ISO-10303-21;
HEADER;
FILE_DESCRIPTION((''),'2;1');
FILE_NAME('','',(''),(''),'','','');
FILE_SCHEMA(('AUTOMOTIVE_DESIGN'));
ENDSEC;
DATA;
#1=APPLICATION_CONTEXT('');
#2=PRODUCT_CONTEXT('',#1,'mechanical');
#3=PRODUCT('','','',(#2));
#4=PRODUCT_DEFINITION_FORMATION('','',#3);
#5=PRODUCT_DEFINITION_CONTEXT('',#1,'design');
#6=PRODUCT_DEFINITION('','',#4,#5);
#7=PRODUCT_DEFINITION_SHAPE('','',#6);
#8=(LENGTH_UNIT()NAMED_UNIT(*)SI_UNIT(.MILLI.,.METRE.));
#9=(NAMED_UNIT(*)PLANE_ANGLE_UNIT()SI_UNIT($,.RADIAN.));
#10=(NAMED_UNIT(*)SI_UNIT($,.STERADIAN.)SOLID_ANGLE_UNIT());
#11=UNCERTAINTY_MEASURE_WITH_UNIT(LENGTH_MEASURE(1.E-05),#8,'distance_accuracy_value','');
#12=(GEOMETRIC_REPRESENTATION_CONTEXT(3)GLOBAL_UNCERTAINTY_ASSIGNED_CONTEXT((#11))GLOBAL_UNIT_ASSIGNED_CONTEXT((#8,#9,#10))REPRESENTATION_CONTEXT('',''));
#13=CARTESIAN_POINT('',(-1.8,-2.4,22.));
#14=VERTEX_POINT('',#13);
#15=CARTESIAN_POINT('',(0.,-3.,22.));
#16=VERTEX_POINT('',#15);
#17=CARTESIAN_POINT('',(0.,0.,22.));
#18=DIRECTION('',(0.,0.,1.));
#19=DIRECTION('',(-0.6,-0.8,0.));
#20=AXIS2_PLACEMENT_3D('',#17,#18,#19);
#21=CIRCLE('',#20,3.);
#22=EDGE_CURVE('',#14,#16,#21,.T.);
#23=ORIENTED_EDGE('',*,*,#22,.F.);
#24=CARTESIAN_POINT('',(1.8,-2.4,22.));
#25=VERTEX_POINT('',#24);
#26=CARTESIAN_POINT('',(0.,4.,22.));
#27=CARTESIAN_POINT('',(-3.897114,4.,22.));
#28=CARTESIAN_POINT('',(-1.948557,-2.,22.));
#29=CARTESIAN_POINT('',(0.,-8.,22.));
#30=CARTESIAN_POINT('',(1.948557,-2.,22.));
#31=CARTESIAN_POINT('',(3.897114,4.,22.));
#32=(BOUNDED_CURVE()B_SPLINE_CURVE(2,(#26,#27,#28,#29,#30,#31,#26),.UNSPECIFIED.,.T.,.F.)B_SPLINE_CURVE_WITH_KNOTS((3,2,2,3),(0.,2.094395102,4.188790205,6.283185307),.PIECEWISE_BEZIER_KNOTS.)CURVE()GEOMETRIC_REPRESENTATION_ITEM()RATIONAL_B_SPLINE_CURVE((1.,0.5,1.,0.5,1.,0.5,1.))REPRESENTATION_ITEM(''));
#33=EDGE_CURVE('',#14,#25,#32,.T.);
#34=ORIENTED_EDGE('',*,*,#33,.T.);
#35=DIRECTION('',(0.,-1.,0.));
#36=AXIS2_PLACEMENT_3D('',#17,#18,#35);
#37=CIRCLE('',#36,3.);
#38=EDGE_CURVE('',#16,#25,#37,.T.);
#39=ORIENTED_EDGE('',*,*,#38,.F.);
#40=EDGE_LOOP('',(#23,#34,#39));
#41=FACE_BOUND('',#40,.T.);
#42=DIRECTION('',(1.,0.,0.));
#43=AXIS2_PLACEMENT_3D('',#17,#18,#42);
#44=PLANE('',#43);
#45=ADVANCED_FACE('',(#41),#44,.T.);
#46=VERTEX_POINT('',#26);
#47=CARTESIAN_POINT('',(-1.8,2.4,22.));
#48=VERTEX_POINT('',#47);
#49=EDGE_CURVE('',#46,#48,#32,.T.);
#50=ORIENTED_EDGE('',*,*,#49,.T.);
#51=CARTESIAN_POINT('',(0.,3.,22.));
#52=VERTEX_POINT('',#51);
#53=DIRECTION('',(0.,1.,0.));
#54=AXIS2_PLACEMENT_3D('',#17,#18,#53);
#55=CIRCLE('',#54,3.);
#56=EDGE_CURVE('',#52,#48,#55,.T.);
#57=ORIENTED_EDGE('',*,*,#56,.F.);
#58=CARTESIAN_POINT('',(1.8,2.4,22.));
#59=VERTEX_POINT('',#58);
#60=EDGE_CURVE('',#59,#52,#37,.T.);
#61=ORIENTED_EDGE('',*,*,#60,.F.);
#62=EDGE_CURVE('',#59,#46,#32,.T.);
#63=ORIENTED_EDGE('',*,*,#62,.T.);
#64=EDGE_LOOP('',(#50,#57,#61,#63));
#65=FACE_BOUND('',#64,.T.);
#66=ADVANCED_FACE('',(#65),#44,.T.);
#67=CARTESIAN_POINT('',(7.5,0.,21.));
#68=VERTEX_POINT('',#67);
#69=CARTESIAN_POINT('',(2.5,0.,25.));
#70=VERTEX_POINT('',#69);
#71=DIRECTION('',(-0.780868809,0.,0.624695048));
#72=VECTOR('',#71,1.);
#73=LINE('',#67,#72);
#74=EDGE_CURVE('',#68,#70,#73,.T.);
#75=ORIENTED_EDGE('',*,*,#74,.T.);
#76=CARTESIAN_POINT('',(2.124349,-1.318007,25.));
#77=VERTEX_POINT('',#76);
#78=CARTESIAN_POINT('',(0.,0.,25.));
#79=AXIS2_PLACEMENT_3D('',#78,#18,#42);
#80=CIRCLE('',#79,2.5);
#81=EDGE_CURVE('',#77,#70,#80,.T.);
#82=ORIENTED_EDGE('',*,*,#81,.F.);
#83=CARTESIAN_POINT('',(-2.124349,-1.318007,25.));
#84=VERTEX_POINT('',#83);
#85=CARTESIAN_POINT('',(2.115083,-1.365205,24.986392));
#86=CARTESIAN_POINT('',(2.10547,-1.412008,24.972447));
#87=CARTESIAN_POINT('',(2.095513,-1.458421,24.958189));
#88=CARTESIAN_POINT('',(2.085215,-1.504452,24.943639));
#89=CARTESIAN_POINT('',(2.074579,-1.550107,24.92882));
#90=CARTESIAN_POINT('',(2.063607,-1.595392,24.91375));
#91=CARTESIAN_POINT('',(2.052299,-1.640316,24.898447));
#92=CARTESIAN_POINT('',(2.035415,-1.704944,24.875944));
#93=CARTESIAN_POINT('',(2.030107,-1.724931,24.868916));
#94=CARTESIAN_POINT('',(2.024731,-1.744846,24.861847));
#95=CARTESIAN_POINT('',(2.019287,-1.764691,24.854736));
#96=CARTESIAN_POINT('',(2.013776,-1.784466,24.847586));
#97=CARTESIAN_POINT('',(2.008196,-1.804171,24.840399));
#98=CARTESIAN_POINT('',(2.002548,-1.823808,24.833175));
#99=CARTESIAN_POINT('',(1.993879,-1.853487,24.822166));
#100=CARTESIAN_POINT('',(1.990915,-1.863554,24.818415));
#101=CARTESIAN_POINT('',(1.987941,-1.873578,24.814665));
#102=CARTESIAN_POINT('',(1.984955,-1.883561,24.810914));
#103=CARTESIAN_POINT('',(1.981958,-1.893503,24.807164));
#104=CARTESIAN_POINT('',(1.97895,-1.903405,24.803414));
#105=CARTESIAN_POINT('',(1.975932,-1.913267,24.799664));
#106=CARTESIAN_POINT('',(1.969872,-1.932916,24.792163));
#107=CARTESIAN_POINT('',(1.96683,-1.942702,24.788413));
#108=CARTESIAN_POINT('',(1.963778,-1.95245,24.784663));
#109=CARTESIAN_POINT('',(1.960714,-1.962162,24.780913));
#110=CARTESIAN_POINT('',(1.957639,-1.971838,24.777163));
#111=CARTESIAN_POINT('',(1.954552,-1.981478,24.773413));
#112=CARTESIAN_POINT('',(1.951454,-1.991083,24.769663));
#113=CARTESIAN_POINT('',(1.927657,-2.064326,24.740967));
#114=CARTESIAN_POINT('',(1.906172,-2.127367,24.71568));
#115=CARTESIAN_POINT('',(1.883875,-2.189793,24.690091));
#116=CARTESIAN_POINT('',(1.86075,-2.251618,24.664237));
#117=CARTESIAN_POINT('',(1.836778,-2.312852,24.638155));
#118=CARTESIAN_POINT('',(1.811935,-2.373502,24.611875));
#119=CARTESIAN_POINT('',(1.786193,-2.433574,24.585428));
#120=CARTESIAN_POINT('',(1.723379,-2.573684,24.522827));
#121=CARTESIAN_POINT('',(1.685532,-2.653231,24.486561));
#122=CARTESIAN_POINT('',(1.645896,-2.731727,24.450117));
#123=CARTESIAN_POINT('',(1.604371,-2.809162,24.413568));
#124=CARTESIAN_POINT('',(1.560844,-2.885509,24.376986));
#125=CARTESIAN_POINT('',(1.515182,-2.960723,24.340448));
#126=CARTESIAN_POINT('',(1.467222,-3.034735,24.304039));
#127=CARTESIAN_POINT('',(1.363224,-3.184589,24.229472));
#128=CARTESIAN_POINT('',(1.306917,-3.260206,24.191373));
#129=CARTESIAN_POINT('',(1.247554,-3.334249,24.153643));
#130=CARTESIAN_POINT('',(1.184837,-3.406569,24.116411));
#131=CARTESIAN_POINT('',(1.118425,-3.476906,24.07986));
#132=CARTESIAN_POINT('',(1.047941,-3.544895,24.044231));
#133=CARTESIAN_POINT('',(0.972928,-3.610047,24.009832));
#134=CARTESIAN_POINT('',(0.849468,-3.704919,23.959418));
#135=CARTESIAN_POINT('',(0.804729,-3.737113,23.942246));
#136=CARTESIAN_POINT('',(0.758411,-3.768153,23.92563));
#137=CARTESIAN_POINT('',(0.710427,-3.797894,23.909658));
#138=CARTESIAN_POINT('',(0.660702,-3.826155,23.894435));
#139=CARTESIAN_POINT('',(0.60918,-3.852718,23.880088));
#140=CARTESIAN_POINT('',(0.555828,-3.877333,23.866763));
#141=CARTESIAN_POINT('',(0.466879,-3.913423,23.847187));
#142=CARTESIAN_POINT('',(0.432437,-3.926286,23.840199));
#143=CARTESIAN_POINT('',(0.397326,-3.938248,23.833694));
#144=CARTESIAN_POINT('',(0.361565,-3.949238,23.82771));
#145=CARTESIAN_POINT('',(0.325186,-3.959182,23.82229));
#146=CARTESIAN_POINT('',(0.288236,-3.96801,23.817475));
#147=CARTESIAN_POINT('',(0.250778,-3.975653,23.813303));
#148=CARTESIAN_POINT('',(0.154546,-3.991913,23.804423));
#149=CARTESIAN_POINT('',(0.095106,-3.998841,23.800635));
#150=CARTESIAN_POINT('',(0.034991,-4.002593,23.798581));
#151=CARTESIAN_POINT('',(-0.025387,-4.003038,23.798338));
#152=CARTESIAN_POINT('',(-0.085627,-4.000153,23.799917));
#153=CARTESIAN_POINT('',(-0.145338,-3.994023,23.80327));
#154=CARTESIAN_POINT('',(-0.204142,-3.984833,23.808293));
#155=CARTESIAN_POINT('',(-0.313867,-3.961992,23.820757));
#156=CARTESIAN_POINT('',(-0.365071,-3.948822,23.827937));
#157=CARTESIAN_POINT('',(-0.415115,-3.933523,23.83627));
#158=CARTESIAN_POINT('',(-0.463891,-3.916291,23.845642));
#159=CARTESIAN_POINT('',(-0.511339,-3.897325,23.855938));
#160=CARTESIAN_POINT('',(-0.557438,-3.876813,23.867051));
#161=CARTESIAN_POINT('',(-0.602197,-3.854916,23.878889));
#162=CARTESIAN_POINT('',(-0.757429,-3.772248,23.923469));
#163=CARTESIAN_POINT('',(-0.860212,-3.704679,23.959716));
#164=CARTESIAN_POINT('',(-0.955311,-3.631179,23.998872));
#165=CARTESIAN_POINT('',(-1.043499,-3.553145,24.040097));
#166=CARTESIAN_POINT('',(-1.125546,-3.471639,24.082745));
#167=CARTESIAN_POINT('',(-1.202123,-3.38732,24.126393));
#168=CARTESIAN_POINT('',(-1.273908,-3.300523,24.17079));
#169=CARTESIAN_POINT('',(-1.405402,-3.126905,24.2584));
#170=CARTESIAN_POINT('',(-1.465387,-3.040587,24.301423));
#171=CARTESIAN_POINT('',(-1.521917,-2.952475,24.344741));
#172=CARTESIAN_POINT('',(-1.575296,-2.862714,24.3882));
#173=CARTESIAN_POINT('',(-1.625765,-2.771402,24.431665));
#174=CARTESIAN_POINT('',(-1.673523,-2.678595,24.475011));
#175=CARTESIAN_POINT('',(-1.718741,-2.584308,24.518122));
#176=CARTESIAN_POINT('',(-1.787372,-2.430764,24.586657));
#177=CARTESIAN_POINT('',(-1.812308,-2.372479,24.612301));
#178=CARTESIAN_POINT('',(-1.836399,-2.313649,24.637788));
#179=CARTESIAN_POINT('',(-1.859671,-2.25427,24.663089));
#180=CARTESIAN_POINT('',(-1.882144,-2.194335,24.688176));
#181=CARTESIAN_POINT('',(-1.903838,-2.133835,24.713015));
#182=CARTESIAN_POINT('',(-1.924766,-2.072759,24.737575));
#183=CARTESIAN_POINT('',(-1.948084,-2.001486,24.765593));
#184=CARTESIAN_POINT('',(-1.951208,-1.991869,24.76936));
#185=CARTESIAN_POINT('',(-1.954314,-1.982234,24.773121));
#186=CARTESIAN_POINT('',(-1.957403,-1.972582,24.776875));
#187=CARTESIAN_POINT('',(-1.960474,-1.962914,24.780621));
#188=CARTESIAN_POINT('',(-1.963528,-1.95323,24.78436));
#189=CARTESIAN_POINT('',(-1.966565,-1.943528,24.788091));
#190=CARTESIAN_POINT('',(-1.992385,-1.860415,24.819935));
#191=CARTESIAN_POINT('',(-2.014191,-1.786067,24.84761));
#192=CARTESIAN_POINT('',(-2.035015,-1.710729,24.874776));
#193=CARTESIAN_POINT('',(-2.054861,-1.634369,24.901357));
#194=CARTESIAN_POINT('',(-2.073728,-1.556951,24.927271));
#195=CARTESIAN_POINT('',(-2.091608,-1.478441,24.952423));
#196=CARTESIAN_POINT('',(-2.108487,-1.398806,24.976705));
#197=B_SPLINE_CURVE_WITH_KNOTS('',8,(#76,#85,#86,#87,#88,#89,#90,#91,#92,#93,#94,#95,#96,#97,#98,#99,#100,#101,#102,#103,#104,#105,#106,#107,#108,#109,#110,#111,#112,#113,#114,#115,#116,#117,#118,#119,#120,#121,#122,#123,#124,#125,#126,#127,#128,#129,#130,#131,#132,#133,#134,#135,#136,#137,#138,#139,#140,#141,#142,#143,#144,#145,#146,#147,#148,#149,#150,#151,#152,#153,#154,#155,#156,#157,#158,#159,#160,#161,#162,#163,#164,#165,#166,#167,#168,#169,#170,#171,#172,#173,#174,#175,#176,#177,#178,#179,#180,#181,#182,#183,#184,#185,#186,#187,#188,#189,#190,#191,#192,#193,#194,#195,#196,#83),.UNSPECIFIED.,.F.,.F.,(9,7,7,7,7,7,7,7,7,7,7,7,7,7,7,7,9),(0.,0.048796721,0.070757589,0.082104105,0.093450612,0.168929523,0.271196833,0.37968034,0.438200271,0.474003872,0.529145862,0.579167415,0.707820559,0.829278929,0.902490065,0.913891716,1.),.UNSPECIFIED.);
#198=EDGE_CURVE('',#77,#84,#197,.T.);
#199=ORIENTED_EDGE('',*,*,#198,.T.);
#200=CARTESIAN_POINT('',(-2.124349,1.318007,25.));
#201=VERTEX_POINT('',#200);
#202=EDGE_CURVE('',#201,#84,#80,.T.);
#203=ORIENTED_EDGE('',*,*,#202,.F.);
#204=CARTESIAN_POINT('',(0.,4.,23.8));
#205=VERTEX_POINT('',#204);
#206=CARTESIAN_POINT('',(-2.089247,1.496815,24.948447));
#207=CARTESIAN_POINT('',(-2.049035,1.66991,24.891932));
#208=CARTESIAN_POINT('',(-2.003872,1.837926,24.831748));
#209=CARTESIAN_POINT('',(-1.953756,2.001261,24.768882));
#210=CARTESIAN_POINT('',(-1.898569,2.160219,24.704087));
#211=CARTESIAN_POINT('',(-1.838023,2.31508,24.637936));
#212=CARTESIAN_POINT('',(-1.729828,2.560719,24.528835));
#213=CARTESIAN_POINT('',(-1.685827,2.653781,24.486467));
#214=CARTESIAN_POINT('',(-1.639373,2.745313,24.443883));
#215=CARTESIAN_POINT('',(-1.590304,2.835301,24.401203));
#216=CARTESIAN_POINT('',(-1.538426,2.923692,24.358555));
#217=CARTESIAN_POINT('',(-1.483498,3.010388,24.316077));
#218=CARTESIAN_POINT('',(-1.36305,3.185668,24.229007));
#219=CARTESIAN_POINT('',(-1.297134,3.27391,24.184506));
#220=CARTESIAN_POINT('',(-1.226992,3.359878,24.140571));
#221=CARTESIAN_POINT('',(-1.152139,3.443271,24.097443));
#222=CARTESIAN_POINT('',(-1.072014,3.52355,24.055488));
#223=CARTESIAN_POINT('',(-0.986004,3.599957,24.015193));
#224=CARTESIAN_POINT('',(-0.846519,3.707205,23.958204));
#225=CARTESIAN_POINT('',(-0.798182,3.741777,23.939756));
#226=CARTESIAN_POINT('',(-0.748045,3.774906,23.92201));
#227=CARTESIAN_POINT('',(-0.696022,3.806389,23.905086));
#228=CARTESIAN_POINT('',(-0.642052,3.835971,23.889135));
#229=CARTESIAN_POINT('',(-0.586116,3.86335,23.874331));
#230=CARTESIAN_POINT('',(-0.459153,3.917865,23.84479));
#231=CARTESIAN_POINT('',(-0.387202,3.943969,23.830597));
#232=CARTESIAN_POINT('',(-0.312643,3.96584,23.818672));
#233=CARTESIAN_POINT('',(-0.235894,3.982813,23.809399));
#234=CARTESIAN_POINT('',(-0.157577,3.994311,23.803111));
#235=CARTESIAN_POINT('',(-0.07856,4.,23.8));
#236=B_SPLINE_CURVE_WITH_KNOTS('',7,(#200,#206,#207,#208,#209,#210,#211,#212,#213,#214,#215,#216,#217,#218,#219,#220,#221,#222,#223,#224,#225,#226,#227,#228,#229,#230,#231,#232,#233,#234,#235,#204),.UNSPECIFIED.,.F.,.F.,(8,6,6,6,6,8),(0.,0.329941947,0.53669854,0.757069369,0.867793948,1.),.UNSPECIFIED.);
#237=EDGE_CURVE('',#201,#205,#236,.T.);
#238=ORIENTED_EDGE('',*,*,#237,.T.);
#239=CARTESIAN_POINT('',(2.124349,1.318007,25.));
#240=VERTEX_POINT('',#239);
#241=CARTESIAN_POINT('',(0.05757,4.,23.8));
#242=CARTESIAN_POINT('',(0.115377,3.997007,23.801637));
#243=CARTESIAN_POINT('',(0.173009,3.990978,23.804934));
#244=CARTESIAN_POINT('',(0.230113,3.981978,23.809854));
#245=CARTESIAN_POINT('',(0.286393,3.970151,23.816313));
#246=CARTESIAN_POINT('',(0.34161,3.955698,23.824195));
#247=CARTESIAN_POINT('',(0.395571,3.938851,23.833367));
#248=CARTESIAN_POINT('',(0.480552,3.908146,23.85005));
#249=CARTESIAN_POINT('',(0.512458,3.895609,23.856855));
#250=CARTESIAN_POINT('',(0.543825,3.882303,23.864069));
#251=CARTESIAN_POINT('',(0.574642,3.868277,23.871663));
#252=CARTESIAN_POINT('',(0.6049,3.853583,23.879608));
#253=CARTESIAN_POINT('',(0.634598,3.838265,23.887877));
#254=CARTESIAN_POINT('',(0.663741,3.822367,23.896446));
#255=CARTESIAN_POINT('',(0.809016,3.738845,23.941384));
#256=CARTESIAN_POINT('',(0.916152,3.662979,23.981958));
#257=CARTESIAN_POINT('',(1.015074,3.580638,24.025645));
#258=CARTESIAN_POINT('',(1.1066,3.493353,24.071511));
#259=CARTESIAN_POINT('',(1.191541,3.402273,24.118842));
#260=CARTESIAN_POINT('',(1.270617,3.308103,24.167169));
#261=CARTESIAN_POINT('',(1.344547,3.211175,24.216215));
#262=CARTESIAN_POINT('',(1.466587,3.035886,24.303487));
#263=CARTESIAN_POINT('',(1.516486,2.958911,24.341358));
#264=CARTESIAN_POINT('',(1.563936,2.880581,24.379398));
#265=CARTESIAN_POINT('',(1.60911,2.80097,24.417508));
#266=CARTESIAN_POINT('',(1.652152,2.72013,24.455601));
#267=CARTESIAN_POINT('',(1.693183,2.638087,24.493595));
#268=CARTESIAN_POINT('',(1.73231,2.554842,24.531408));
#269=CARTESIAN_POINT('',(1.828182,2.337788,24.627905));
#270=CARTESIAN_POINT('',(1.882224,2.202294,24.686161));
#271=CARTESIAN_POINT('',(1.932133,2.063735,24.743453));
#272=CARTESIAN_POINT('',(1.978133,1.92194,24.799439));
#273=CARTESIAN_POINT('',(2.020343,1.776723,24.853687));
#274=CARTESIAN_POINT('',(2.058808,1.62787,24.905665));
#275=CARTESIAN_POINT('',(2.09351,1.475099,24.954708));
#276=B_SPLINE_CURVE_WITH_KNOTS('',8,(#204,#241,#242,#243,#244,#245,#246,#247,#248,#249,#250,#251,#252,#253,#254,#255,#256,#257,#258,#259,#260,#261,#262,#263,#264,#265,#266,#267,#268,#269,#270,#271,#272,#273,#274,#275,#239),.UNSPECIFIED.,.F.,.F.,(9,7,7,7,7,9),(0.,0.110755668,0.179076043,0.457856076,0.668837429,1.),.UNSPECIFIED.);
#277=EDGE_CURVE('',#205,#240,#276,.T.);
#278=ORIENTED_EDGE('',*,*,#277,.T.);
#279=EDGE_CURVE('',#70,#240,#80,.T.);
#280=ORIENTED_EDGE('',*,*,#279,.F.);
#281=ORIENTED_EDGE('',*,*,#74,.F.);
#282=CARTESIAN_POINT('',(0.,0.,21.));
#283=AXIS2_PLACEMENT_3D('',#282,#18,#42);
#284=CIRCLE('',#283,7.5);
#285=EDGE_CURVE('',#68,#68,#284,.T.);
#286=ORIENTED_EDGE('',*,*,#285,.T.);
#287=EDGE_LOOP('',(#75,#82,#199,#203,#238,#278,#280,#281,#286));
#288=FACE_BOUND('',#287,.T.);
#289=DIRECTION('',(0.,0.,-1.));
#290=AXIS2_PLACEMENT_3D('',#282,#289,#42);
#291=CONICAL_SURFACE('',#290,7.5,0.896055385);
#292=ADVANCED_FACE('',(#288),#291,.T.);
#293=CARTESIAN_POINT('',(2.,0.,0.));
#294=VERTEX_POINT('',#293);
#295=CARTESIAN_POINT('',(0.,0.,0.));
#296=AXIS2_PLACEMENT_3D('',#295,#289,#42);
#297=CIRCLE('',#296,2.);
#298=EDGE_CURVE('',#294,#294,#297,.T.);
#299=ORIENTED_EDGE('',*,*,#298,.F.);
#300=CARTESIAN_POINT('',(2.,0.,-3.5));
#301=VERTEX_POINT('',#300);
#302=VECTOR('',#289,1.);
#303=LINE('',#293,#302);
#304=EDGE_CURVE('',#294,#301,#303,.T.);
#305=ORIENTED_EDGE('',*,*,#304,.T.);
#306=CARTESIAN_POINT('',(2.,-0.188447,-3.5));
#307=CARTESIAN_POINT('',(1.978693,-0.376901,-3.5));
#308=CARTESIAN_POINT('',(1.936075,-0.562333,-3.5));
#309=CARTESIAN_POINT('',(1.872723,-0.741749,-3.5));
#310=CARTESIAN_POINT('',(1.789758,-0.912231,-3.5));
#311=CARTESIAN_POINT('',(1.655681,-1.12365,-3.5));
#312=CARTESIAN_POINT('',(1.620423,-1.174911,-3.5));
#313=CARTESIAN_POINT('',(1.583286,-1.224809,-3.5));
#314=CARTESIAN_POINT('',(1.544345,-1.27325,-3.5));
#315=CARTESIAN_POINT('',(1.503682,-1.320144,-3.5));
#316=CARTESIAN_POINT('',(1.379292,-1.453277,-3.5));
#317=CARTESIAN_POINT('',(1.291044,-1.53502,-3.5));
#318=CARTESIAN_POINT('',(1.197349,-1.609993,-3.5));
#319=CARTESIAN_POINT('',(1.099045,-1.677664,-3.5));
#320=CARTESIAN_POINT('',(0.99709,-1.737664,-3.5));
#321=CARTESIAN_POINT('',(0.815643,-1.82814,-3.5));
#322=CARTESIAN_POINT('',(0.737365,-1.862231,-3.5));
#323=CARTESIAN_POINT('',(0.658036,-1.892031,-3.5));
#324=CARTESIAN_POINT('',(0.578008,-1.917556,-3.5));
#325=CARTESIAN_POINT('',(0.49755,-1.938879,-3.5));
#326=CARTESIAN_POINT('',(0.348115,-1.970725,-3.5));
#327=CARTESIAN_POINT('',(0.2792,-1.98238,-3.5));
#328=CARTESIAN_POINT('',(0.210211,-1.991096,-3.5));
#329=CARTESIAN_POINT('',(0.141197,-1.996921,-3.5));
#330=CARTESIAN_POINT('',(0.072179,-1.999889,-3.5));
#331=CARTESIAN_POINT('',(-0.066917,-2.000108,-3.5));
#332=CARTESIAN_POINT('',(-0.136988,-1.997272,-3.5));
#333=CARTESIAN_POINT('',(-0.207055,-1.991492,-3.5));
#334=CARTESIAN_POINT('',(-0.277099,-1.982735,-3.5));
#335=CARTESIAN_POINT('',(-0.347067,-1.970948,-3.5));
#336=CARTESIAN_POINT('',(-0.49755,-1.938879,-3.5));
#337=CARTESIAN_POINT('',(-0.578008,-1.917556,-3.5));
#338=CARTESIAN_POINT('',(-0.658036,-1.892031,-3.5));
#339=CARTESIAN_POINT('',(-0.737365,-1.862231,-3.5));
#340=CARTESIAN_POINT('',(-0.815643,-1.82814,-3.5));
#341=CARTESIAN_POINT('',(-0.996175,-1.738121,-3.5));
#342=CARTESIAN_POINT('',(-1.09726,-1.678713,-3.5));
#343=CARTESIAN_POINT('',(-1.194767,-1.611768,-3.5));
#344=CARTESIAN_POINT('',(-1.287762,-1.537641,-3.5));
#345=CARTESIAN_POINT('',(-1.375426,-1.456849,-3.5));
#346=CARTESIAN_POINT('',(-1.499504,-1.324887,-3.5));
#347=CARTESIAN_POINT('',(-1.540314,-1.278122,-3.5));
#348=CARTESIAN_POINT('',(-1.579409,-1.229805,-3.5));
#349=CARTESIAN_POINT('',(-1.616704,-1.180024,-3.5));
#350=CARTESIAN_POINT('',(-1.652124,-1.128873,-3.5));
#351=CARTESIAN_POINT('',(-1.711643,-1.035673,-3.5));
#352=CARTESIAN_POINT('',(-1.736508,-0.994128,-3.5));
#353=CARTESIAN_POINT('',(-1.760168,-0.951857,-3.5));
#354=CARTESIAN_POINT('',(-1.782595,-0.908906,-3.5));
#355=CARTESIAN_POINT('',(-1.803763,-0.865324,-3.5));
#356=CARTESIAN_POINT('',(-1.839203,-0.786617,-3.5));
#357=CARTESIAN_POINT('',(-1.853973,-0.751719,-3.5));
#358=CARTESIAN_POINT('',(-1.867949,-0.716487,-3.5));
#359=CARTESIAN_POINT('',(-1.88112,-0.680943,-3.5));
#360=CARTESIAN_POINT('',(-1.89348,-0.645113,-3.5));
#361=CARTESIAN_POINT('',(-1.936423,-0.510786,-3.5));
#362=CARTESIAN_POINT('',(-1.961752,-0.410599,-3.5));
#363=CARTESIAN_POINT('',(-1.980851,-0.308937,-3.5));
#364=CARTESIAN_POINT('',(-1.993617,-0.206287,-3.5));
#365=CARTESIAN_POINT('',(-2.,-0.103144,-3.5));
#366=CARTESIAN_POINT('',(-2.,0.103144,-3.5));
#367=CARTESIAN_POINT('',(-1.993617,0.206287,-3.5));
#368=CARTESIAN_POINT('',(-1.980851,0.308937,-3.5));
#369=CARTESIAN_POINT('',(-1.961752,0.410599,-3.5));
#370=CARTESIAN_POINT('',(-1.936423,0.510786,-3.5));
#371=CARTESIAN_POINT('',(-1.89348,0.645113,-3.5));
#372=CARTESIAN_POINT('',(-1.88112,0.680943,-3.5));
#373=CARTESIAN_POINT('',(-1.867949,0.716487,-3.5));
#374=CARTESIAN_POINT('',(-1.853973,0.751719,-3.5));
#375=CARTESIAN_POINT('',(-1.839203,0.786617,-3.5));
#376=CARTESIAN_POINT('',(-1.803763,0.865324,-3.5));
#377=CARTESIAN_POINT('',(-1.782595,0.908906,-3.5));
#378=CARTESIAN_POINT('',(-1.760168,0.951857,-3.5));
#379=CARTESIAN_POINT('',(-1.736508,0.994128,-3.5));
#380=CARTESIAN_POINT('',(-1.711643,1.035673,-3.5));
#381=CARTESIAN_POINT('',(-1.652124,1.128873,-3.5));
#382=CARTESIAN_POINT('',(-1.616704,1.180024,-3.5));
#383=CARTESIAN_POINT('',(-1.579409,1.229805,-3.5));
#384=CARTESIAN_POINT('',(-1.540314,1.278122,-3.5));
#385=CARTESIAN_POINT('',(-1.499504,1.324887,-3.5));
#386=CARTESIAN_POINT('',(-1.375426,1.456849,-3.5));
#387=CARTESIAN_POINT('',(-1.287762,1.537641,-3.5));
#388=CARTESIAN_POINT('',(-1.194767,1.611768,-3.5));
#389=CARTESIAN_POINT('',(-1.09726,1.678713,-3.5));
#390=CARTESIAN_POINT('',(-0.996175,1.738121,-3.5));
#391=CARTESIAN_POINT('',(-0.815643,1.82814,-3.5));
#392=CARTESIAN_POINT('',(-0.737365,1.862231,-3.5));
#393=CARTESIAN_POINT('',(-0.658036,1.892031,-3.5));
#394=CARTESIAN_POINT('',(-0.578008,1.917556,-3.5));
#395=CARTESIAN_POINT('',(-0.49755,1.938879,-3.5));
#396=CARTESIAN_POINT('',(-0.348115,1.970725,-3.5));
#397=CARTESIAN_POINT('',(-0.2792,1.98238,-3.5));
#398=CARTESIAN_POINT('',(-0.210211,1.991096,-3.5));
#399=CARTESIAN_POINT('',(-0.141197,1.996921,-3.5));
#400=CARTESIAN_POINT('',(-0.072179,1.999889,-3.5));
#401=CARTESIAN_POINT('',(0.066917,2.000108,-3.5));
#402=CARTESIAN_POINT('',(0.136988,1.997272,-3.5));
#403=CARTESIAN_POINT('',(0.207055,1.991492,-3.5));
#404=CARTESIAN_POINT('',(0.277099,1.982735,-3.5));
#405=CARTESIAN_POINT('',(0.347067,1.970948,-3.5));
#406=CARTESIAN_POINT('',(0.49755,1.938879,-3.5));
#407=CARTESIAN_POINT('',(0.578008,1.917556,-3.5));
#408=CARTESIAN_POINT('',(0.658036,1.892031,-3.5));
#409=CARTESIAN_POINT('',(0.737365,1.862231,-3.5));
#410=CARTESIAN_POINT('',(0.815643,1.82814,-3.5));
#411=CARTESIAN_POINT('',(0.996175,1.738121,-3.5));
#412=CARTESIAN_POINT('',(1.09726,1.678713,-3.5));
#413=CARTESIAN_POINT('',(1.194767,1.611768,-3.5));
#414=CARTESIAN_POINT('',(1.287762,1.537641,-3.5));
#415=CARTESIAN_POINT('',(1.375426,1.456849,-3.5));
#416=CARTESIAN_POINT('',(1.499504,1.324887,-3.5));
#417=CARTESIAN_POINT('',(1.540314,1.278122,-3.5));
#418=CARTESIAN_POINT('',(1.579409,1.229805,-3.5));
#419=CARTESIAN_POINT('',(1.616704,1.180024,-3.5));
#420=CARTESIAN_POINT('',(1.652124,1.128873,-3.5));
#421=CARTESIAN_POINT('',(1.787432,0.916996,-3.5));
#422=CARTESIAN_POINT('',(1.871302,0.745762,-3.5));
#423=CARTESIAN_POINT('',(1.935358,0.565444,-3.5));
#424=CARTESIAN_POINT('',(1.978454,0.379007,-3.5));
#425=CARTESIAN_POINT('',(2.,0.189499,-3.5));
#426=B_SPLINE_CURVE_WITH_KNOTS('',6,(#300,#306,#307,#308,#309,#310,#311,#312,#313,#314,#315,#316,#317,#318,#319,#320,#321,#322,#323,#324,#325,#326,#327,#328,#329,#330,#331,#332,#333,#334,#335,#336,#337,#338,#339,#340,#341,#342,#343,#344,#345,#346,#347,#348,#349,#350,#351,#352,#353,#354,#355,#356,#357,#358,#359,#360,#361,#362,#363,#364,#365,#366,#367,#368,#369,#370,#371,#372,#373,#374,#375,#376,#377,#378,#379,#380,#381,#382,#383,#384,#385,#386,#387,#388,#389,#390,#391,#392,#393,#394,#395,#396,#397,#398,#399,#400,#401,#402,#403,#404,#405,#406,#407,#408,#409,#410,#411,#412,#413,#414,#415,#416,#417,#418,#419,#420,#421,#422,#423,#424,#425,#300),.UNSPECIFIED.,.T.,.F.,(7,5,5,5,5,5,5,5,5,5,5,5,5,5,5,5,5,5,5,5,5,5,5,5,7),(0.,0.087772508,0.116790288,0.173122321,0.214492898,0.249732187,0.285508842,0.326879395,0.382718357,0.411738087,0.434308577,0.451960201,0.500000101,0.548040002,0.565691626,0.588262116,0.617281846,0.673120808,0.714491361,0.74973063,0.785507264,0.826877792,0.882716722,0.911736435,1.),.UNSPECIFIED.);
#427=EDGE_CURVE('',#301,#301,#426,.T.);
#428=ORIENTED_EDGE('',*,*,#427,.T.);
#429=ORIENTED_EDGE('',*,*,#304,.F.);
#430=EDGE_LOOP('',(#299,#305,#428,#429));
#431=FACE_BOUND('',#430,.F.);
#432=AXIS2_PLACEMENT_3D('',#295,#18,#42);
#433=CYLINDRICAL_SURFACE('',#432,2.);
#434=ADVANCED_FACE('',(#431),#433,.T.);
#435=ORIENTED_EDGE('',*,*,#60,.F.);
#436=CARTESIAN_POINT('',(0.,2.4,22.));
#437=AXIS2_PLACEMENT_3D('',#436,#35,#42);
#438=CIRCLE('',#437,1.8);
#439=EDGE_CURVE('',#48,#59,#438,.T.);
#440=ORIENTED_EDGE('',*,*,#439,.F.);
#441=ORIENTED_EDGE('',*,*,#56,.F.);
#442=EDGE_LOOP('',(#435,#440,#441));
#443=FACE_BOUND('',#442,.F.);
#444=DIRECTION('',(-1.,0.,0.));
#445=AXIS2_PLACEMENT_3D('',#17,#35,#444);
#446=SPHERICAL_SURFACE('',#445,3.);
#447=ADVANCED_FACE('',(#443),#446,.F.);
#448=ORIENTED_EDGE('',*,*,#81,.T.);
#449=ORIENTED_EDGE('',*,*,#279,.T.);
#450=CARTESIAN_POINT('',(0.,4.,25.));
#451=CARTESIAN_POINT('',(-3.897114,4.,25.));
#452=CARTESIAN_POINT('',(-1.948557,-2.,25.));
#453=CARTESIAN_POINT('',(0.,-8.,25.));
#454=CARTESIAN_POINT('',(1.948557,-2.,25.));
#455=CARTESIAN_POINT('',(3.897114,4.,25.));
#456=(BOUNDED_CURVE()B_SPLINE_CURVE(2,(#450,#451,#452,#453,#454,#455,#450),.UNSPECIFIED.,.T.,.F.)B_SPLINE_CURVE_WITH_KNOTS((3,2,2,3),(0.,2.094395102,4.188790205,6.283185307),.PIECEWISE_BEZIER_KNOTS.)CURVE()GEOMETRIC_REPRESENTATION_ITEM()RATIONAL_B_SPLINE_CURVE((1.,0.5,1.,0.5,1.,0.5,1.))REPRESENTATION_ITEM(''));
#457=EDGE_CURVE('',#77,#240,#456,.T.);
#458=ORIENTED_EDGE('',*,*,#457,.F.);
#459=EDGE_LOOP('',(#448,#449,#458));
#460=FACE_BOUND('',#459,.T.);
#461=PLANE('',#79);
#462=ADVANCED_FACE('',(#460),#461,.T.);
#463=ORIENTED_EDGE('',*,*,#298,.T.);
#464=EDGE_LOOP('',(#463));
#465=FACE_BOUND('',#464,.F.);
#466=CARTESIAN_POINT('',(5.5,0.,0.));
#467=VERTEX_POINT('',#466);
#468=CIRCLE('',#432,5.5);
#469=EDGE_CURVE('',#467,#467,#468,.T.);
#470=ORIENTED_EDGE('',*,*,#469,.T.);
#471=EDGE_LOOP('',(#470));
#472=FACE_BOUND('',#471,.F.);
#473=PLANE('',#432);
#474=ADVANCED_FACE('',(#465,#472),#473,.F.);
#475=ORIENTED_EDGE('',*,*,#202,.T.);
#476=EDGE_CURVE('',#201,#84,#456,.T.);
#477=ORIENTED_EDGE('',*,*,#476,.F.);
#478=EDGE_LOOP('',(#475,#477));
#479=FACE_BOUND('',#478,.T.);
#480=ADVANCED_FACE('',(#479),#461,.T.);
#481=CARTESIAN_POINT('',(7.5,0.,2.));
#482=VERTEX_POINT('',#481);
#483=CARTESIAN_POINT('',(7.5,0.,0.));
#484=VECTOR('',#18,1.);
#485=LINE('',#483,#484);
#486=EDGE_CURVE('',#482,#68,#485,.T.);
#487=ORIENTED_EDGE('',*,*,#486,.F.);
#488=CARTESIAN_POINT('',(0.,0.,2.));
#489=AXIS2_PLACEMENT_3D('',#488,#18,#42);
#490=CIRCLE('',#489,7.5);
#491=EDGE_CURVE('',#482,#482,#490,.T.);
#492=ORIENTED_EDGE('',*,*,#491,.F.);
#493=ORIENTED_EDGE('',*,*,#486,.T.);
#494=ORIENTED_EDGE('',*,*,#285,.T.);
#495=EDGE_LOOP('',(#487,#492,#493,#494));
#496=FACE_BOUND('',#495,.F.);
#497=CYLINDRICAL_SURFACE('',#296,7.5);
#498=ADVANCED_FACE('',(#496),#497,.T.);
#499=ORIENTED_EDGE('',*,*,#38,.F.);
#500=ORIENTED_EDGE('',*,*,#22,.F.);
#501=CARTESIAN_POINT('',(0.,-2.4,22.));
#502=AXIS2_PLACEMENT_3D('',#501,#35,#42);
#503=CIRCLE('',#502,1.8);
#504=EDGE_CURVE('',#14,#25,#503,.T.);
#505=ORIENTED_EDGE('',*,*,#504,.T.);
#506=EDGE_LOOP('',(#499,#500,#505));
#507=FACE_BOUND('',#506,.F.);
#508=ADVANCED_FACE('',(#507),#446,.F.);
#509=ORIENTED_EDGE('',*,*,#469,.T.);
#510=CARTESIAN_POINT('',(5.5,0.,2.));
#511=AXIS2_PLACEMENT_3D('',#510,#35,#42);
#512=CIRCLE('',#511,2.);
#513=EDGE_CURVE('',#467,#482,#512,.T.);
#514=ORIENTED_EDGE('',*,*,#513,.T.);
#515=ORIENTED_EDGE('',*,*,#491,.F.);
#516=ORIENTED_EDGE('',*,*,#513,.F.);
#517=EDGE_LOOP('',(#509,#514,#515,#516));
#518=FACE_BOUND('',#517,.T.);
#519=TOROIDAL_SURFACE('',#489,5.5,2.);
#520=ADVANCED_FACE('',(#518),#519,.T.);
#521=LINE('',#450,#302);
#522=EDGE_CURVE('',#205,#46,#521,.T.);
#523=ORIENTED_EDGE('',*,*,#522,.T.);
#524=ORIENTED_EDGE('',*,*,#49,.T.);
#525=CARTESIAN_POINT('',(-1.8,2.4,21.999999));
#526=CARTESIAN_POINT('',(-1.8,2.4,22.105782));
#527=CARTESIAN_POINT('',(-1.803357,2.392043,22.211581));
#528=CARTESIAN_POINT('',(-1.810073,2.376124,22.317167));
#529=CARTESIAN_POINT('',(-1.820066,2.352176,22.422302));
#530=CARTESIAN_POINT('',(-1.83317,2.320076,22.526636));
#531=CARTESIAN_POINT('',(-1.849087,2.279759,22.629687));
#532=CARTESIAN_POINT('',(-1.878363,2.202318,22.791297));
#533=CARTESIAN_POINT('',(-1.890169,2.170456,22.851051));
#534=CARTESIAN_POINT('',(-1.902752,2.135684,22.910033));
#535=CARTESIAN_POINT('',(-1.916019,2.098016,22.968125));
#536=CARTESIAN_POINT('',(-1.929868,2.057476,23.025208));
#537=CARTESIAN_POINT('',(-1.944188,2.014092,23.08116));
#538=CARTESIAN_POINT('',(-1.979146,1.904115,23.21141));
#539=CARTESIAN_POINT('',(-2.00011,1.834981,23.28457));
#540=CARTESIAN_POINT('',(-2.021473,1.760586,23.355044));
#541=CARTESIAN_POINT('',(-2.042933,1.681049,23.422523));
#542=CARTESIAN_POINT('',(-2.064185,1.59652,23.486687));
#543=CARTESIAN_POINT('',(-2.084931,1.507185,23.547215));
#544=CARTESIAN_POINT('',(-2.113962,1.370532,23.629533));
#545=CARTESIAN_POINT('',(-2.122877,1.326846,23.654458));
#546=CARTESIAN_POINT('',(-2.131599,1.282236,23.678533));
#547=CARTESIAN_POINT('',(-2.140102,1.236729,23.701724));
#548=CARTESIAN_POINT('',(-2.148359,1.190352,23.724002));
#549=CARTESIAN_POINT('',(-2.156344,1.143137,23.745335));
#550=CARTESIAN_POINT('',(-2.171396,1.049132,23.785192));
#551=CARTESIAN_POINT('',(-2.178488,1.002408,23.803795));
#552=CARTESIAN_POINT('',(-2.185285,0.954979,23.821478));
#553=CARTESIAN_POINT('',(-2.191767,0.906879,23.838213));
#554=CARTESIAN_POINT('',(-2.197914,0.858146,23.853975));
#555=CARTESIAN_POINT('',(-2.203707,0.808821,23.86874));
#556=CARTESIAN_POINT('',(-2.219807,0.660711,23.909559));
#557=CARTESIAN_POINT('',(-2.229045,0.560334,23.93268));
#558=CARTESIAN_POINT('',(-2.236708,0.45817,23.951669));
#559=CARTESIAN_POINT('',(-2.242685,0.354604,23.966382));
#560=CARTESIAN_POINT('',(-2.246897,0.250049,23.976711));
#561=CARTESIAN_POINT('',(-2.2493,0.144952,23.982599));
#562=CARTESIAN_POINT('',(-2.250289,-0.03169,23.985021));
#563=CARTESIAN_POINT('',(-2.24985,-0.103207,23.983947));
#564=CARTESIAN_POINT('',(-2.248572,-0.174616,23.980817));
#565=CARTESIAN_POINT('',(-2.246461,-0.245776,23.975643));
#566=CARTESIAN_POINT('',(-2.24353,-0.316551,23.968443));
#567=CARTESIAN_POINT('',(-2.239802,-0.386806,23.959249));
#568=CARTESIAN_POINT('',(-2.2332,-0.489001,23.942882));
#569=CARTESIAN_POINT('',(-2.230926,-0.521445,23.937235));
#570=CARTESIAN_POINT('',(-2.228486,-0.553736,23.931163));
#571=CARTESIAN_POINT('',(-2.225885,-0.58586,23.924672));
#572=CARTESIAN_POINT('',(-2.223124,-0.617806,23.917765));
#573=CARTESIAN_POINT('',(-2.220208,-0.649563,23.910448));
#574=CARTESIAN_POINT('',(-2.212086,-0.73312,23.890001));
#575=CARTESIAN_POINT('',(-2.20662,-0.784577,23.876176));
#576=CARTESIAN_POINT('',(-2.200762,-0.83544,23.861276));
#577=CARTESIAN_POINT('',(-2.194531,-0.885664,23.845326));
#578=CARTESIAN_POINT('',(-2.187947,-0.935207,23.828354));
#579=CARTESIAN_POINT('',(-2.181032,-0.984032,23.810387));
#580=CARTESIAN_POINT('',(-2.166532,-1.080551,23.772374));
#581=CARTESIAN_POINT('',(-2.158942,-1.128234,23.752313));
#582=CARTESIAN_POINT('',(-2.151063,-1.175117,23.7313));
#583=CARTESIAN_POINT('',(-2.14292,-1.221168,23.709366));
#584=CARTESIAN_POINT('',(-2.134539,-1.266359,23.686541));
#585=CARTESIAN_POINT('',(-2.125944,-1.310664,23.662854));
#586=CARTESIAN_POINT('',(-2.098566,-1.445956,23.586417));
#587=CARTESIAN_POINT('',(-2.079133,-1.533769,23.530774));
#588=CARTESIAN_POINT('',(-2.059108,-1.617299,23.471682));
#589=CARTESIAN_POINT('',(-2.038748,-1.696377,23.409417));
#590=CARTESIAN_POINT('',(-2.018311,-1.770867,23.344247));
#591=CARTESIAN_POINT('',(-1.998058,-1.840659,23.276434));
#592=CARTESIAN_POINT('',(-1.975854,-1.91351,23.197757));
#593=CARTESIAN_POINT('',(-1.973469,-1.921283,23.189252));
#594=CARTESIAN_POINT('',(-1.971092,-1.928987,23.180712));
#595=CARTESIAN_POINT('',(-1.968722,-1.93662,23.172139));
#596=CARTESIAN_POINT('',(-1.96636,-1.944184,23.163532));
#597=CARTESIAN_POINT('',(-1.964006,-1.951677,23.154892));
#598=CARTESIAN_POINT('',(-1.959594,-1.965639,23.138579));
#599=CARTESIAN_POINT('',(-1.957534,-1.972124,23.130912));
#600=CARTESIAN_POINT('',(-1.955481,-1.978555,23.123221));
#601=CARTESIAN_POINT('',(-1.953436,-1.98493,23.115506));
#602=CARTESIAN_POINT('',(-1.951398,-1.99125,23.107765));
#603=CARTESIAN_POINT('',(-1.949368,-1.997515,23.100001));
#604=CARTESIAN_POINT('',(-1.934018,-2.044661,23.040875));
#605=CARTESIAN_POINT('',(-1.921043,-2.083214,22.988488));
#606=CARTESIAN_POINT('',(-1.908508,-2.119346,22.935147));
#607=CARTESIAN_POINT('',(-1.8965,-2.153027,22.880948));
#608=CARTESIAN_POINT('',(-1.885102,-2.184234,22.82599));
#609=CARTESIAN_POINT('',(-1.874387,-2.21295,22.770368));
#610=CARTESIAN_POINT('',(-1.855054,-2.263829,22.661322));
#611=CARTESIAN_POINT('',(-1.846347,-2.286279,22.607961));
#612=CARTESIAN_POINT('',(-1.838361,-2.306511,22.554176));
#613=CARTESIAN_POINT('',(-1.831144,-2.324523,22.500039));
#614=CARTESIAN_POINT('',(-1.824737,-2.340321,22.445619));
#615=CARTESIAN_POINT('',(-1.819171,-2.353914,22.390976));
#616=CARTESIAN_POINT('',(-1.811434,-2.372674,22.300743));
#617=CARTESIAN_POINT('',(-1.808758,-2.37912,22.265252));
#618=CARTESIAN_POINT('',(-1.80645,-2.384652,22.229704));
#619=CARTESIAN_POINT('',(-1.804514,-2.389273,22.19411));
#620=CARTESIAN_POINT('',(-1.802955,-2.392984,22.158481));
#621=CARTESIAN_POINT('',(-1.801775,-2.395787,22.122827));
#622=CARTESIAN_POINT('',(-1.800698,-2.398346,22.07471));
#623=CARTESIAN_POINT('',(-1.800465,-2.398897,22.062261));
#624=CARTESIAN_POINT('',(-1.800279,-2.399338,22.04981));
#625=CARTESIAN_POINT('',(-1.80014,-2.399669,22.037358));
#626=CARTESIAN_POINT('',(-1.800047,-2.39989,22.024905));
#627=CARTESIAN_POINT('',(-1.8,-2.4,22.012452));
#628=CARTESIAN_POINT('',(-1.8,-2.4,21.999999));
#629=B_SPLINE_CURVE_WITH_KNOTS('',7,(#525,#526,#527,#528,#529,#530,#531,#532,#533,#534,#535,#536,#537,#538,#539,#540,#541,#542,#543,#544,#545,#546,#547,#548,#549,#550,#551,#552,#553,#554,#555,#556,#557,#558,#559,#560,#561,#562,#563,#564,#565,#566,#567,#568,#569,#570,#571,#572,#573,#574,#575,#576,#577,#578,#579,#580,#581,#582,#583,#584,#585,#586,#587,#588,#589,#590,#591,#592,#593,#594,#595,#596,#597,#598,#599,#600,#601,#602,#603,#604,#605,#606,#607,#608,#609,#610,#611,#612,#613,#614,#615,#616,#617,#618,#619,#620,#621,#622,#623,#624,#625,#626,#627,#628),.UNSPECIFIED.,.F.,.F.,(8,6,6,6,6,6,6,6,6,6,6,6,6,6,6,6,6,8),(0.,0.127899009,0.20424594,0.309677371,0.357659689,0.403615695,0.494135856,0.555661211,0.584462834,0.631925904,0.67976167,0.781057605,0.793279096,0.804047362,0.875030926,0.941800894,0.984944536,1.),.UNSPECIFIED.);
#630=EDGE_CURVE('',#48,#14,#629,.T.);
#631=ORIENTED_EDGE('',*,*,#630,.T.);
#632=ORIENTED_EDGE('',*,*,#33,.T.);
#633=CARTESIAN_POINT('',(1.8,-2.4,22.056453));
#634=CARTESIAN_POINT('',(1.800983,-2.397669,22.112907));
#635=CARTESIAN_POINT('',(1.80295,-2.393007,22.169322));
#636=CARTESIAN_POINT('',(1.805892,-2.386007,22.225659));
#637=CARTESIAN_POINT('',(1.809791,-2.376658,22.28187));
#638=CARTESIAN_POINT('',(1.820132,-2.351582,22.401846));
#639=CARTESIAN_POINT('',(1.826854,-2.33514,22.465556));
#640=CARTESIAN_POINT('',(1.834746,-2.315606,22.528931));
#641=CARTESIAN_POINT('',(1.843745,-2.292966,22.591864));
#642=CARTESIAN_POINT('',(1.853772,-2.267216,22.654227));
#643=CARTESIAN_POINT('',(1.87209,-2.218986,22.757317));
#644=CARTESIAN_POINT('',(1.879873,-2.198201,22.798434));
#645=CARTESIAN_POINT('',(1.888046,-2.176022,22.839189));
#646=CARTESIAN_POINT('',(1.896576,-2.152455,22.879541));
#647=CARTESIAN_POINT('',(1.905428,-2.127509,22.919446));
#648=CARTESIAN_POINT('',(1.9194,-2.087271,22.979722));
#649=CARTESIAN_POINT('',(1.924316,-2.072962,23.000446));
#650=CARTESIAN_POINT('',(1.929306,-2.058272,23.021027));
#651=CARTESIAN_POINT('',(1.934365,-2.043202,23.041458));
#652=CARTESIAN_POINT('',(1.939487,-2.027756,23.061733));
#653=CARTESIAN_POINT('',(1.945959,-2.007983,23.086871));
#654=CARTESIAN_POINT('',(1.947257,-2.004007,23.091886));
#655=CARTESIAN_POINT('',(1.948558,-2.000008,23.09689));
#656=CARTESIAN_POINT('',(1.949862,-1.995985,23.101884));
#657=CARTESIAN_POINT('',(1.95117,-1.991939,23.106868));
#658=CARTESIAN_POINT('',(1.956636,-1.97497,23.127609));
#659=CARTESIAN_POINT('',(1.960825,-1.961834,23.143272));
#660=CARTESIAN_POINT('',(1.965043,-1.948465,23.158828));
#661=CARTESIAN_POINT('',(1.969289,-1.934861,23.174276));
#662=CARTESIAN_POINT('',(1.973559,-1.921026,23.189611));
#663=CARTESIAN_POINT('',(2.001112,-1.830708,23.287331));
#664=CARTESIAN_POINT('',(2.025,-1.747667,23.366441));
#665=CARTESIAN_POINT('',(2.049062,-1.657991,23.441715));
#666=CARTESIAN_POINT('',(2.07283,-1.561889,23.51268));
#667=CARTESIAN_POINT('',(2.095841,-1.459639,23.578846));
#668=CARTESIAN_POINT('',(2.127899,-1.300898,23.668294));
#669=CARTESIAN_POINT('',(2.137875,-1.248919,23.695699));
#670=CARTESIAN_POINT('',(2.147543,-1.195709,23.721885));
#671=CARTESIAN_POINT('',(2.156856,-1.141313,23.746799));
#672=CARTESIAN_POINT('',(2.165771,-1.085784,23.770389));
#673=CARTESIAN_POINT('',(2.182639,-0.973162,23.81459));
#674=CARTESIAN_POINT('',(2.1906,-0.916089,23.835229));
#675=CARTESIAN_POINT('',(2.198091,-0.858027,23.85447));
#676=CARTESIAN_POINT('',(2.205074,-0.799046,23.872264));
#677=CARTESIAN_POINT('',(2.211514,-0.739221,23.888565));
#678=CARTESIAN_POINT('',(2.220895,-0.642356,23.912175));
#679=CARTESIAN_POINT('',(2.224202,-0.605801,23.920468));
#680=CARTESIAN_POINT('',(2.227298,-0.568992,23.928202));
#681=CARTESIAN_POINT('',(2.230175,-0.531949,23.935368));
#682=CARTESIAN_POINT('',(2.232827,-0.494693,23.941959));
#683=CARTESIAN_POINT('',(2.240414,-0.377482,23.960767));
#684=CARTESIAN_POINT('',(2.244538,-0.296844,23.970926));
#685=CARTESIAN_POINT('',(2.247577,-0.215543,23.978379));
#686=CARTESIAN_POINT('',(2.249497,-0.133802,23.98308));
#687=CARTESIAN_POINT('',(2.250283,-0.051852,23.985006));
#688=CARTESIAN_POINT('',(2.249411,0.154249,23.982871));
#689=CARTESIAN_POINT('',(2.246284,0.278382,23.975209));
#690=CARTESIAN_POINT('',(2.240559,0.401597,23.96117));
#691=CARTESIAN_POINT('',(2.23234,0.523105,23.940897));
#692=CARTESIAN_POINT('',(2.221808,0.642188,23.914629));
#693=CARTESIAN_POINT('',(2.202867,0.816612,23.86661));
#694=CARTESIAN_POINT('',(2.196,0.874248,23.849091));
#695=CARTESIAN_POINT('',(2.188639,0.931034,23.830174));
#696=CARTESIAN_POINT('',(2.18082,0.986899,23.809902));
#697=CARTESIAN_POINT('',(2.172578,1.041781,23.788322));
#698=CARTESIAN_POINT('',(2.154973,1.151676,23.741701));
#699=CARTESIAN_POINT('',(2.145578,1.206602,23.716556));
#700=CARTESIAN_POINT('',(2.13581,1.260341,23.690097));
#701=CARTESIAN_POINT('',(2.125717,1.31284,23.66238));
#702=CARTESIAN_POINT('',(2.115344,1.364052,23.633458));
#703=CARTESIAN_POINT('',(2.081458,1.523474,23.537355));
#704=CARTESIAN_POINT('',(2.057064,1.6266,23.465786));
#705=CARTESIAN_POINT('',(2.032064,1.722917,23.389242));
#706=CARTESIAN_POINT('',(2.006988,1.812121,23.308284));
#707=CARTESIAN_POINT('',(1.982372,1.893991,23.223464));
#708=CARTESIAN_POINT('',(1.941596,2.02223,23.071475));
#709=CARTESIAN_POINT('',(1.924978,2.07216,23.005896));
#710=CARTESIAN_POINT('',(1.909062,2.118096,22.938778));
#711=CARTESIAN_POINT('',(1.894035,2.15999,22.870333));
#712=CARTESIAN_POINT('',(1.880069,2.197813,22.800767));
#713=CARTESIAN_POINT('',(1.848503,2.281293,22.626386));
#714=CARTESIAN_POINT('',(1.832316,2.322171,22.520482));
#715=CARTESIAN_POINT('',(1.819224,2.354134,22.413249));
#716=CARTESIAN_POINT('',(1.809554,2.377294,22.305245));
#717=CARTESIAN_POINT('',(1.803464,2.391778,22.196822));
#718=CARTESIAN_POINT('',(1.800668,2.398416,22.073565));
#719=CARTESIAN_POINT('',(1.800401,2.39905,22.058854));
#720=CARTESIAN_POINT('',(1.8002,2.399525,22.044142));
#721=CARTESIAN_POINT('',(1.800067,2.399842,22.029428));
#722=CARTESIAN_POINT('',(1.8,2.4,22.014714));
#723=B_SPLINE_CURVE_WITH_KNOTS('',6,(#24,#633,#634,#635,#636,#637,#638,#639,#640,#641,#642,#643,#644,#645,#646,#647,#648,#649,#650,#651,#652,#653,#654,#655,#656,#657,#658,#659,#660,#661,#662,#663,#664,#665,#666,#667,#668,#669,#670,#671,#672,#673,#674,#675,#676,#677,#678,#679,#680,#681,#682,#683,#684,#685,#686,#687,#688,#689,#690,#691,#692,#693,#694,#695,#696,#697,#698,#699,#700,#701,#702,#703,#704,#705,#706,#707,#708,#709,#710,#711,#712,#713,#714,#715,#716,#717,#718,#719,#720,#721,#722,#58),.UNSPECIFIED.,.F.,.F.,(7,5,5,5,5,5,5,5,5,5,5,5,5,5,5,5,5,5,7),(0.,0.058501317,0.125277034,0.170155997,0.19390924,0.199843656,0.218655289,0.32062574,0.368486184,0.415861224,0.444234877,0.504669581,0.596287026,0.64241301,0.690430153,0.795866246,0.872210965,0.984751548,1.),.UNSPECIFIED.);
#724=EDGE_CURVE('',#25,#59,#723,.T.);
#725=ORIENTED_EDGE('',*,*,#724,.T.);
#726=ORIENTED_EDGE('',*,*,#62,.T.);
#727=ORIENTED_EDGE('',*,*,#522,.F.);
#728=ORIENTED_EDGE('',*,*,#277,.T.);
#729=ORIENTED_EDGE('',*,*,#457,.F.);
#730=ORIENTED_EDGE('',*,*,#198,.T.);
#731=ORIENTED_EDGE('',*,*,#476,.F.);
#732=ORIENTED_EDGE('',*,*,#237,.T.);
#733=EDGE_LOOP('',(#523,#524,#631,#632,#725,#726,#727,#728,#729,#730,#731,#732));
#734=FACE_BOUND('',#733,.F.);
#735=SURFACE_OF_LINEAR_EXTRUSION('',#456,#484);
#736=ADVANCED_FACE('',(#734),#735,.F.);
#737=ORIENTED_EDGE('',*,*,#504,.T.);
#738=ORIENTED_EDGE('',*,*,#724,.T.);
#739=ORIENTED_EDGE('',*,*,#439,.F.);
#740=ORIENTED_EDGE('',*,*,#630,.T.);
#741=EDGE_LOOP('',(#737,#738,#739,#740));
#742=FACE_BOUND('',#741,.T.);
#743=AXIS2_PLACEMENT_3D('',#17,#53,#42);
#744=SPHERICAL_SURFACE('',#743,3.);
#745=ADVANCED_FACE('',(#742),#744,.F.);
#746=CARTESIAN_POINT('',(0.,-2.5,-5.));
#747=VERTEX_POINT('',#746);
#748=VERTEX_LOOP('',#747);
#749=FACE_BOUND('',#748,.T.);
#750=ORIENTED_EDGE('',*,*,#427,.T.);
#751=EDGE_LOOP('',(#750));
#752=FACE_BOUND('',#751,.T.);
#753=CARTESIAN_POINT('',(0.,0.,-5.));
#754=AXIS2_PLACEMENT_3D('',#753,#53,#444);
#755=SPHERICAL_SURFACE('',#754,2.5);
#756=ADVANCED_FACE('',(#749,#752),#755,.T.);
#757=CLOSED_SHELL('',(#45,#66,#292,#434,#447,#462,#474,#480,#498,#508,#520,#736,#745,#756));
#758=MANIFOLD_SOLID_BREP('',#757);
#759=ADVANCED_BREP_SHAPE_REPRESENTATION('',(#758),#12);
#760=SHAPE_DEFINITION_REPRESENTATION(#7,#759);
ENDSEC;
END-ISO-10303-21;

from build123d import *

# Parameters (mm, degrees)
F0_R     = 7.5
F1_DEPTH = 25
F2_R     = 2
F3_DEPTH = 5
F7_DEPTH = 3
F11_R    = 2


# Not quite as in the source:
# - a fillet or chamfer that OpenCascade refuses, or shapes differently, is made with other operations: its cross-section is extruded or revolved along the edge and cut away or added


with BuildPart() as f1:
    # F0 (on Top) → F1 (new body)
    with BuildSketch(Plane.XY):
        Circle(F0_R)
    extrude(amount=F1_DEPTH)

    # F2 (on face) → F3 (join)
    with BuildSketch(Plane(origin=(0, 0, 0), x_dir=(1, 0, 0), z_dir=(0, 0, -1))):
        Circle(F2_R)
    extrude(amount=F3_DEPTH)

    # F4 (on face) → F5 (revolve)
    with BuildSketch(Plane(origin=(0, 0, -5), x_dir=(1, 0, 0), z_dir=(0, 0, -1))):
        with BuildLine():
            Line((0, 2), (0, 2.5))
            ThreePointArc((0, 2.5), (-2.5, 0), (0, -2.5))
            Line((0, -2.5), (0, -2))
            ThreePointArc((0, -2), (-2, 0), (0, 2))
        make_face()
        with BuildLine():
            Line((0, -2), (0, 2))
            ThreePointArc((0, 2), (-2, 0), (0, -2))
        make_face()
    revolve(axis=Axis((0, 0, -5), (0, 1, 0)))

    # F6 (on face) → F7 (cut)
    with BuildSketch(Plane.XY.offset(25)):
        with BuildLine():
            add(Edge.make_bspline(
                [(0, 4), (-3.897114317, 4), (-1.9485571585, -2), (0, -8), (1.9485571585, -2), (3.897114317, 4), (0, 4)],
                knots=[0, 0, 0, 2.0943951024, 2.0943951024, 4.1887902048, 4.1887902048, 6.2831853072, 6.2831853072, 6.2831853072], degree=2, weights=[1, 0.5, 1, 0.5, 1, 0.5, 1]))
        make_face()
    extrude(amount=-F7_DEPTH, mode=Mode.SUBTRACT)

    # F8 (on face) → F9 (revolve, cut)
    with BuildSketch(Plane.XY.offset(22)):
        with BuildLine():
            ThreePointArc((1.8, -2.4), (2.683281573, -1.3416407865), (3, 0))
            ThreePointArc((3, 0), (2.683281573, 1.3416407865), (1.8, 2.4))
            add(Edge.make_bspline(
                [(1.8, -2.4), (1.8810311774, -2.2079260981), (1.9485571585, -2), (2.6913429511, 0.2871870789), (1.8, 2.4)],
                knots=[4.0484923357, 4.0484923357, 4.0484923357, 4.1887902048, 4.1887902048, 5.3448576064, 5.3448576064, 5.3448576064], degree=2, weights=[0.9375, 0.9665063509, 1, 0.7240092377, 0.7527020789]))
        make_face()
        with BuildLine():
            Line((0, -3), (0, 3))
            ThreePointArc((0, 3), (-0.9486832981, 2.8460498942), (-1.8, 2.4))
            add(Edge.make_bspline(
                [(-1.8, 2.4), (-2.6913429511, 0.2871870789), (-1.9485571585, -2), (-1.8810311774, -2.2079260981), (-1.8, -2.4)],
                knots=[0.9383277008, 0.9383277008, 0.9383277008, 2.0943951024, 2.0943951024, 2.2346929715, 2.2346929715, 2.2346929715], degree=2, weights=[0.7527020789, 0.7240092377, 1, 0.9665063509, 0.9375]))
            ThreePointArc((-1.8, -2.4), (-0.9486832981, -2.8460498942), (0, -3))
        make_face()
    revolve(axis=Axis((0, 0, 22), (0, -1, 0)), mode=Mode.SUBTRACT)

    # F10: chamfer of 5 x 4 on 1 edges, made by hand

    # F10_s1 → F10_t2 (revolve, cut)
    with BuildSketch(Plane.XZ):
        Polygon((7.5, 21), (2.5, 25), (7.5, 25), align=None)
    revolve(axis=Axis((0, 0, 25), (0, 0, 1)), mode=Mode.SUBTRACT)

    # F11
    f11_edges = [f1.edges().sort_by_distance(p)[0] for p in [
        (-7.5, 0, 0),
    ]]
    fillet(f11_edges, radius=F11_R)


solid = f1.part
